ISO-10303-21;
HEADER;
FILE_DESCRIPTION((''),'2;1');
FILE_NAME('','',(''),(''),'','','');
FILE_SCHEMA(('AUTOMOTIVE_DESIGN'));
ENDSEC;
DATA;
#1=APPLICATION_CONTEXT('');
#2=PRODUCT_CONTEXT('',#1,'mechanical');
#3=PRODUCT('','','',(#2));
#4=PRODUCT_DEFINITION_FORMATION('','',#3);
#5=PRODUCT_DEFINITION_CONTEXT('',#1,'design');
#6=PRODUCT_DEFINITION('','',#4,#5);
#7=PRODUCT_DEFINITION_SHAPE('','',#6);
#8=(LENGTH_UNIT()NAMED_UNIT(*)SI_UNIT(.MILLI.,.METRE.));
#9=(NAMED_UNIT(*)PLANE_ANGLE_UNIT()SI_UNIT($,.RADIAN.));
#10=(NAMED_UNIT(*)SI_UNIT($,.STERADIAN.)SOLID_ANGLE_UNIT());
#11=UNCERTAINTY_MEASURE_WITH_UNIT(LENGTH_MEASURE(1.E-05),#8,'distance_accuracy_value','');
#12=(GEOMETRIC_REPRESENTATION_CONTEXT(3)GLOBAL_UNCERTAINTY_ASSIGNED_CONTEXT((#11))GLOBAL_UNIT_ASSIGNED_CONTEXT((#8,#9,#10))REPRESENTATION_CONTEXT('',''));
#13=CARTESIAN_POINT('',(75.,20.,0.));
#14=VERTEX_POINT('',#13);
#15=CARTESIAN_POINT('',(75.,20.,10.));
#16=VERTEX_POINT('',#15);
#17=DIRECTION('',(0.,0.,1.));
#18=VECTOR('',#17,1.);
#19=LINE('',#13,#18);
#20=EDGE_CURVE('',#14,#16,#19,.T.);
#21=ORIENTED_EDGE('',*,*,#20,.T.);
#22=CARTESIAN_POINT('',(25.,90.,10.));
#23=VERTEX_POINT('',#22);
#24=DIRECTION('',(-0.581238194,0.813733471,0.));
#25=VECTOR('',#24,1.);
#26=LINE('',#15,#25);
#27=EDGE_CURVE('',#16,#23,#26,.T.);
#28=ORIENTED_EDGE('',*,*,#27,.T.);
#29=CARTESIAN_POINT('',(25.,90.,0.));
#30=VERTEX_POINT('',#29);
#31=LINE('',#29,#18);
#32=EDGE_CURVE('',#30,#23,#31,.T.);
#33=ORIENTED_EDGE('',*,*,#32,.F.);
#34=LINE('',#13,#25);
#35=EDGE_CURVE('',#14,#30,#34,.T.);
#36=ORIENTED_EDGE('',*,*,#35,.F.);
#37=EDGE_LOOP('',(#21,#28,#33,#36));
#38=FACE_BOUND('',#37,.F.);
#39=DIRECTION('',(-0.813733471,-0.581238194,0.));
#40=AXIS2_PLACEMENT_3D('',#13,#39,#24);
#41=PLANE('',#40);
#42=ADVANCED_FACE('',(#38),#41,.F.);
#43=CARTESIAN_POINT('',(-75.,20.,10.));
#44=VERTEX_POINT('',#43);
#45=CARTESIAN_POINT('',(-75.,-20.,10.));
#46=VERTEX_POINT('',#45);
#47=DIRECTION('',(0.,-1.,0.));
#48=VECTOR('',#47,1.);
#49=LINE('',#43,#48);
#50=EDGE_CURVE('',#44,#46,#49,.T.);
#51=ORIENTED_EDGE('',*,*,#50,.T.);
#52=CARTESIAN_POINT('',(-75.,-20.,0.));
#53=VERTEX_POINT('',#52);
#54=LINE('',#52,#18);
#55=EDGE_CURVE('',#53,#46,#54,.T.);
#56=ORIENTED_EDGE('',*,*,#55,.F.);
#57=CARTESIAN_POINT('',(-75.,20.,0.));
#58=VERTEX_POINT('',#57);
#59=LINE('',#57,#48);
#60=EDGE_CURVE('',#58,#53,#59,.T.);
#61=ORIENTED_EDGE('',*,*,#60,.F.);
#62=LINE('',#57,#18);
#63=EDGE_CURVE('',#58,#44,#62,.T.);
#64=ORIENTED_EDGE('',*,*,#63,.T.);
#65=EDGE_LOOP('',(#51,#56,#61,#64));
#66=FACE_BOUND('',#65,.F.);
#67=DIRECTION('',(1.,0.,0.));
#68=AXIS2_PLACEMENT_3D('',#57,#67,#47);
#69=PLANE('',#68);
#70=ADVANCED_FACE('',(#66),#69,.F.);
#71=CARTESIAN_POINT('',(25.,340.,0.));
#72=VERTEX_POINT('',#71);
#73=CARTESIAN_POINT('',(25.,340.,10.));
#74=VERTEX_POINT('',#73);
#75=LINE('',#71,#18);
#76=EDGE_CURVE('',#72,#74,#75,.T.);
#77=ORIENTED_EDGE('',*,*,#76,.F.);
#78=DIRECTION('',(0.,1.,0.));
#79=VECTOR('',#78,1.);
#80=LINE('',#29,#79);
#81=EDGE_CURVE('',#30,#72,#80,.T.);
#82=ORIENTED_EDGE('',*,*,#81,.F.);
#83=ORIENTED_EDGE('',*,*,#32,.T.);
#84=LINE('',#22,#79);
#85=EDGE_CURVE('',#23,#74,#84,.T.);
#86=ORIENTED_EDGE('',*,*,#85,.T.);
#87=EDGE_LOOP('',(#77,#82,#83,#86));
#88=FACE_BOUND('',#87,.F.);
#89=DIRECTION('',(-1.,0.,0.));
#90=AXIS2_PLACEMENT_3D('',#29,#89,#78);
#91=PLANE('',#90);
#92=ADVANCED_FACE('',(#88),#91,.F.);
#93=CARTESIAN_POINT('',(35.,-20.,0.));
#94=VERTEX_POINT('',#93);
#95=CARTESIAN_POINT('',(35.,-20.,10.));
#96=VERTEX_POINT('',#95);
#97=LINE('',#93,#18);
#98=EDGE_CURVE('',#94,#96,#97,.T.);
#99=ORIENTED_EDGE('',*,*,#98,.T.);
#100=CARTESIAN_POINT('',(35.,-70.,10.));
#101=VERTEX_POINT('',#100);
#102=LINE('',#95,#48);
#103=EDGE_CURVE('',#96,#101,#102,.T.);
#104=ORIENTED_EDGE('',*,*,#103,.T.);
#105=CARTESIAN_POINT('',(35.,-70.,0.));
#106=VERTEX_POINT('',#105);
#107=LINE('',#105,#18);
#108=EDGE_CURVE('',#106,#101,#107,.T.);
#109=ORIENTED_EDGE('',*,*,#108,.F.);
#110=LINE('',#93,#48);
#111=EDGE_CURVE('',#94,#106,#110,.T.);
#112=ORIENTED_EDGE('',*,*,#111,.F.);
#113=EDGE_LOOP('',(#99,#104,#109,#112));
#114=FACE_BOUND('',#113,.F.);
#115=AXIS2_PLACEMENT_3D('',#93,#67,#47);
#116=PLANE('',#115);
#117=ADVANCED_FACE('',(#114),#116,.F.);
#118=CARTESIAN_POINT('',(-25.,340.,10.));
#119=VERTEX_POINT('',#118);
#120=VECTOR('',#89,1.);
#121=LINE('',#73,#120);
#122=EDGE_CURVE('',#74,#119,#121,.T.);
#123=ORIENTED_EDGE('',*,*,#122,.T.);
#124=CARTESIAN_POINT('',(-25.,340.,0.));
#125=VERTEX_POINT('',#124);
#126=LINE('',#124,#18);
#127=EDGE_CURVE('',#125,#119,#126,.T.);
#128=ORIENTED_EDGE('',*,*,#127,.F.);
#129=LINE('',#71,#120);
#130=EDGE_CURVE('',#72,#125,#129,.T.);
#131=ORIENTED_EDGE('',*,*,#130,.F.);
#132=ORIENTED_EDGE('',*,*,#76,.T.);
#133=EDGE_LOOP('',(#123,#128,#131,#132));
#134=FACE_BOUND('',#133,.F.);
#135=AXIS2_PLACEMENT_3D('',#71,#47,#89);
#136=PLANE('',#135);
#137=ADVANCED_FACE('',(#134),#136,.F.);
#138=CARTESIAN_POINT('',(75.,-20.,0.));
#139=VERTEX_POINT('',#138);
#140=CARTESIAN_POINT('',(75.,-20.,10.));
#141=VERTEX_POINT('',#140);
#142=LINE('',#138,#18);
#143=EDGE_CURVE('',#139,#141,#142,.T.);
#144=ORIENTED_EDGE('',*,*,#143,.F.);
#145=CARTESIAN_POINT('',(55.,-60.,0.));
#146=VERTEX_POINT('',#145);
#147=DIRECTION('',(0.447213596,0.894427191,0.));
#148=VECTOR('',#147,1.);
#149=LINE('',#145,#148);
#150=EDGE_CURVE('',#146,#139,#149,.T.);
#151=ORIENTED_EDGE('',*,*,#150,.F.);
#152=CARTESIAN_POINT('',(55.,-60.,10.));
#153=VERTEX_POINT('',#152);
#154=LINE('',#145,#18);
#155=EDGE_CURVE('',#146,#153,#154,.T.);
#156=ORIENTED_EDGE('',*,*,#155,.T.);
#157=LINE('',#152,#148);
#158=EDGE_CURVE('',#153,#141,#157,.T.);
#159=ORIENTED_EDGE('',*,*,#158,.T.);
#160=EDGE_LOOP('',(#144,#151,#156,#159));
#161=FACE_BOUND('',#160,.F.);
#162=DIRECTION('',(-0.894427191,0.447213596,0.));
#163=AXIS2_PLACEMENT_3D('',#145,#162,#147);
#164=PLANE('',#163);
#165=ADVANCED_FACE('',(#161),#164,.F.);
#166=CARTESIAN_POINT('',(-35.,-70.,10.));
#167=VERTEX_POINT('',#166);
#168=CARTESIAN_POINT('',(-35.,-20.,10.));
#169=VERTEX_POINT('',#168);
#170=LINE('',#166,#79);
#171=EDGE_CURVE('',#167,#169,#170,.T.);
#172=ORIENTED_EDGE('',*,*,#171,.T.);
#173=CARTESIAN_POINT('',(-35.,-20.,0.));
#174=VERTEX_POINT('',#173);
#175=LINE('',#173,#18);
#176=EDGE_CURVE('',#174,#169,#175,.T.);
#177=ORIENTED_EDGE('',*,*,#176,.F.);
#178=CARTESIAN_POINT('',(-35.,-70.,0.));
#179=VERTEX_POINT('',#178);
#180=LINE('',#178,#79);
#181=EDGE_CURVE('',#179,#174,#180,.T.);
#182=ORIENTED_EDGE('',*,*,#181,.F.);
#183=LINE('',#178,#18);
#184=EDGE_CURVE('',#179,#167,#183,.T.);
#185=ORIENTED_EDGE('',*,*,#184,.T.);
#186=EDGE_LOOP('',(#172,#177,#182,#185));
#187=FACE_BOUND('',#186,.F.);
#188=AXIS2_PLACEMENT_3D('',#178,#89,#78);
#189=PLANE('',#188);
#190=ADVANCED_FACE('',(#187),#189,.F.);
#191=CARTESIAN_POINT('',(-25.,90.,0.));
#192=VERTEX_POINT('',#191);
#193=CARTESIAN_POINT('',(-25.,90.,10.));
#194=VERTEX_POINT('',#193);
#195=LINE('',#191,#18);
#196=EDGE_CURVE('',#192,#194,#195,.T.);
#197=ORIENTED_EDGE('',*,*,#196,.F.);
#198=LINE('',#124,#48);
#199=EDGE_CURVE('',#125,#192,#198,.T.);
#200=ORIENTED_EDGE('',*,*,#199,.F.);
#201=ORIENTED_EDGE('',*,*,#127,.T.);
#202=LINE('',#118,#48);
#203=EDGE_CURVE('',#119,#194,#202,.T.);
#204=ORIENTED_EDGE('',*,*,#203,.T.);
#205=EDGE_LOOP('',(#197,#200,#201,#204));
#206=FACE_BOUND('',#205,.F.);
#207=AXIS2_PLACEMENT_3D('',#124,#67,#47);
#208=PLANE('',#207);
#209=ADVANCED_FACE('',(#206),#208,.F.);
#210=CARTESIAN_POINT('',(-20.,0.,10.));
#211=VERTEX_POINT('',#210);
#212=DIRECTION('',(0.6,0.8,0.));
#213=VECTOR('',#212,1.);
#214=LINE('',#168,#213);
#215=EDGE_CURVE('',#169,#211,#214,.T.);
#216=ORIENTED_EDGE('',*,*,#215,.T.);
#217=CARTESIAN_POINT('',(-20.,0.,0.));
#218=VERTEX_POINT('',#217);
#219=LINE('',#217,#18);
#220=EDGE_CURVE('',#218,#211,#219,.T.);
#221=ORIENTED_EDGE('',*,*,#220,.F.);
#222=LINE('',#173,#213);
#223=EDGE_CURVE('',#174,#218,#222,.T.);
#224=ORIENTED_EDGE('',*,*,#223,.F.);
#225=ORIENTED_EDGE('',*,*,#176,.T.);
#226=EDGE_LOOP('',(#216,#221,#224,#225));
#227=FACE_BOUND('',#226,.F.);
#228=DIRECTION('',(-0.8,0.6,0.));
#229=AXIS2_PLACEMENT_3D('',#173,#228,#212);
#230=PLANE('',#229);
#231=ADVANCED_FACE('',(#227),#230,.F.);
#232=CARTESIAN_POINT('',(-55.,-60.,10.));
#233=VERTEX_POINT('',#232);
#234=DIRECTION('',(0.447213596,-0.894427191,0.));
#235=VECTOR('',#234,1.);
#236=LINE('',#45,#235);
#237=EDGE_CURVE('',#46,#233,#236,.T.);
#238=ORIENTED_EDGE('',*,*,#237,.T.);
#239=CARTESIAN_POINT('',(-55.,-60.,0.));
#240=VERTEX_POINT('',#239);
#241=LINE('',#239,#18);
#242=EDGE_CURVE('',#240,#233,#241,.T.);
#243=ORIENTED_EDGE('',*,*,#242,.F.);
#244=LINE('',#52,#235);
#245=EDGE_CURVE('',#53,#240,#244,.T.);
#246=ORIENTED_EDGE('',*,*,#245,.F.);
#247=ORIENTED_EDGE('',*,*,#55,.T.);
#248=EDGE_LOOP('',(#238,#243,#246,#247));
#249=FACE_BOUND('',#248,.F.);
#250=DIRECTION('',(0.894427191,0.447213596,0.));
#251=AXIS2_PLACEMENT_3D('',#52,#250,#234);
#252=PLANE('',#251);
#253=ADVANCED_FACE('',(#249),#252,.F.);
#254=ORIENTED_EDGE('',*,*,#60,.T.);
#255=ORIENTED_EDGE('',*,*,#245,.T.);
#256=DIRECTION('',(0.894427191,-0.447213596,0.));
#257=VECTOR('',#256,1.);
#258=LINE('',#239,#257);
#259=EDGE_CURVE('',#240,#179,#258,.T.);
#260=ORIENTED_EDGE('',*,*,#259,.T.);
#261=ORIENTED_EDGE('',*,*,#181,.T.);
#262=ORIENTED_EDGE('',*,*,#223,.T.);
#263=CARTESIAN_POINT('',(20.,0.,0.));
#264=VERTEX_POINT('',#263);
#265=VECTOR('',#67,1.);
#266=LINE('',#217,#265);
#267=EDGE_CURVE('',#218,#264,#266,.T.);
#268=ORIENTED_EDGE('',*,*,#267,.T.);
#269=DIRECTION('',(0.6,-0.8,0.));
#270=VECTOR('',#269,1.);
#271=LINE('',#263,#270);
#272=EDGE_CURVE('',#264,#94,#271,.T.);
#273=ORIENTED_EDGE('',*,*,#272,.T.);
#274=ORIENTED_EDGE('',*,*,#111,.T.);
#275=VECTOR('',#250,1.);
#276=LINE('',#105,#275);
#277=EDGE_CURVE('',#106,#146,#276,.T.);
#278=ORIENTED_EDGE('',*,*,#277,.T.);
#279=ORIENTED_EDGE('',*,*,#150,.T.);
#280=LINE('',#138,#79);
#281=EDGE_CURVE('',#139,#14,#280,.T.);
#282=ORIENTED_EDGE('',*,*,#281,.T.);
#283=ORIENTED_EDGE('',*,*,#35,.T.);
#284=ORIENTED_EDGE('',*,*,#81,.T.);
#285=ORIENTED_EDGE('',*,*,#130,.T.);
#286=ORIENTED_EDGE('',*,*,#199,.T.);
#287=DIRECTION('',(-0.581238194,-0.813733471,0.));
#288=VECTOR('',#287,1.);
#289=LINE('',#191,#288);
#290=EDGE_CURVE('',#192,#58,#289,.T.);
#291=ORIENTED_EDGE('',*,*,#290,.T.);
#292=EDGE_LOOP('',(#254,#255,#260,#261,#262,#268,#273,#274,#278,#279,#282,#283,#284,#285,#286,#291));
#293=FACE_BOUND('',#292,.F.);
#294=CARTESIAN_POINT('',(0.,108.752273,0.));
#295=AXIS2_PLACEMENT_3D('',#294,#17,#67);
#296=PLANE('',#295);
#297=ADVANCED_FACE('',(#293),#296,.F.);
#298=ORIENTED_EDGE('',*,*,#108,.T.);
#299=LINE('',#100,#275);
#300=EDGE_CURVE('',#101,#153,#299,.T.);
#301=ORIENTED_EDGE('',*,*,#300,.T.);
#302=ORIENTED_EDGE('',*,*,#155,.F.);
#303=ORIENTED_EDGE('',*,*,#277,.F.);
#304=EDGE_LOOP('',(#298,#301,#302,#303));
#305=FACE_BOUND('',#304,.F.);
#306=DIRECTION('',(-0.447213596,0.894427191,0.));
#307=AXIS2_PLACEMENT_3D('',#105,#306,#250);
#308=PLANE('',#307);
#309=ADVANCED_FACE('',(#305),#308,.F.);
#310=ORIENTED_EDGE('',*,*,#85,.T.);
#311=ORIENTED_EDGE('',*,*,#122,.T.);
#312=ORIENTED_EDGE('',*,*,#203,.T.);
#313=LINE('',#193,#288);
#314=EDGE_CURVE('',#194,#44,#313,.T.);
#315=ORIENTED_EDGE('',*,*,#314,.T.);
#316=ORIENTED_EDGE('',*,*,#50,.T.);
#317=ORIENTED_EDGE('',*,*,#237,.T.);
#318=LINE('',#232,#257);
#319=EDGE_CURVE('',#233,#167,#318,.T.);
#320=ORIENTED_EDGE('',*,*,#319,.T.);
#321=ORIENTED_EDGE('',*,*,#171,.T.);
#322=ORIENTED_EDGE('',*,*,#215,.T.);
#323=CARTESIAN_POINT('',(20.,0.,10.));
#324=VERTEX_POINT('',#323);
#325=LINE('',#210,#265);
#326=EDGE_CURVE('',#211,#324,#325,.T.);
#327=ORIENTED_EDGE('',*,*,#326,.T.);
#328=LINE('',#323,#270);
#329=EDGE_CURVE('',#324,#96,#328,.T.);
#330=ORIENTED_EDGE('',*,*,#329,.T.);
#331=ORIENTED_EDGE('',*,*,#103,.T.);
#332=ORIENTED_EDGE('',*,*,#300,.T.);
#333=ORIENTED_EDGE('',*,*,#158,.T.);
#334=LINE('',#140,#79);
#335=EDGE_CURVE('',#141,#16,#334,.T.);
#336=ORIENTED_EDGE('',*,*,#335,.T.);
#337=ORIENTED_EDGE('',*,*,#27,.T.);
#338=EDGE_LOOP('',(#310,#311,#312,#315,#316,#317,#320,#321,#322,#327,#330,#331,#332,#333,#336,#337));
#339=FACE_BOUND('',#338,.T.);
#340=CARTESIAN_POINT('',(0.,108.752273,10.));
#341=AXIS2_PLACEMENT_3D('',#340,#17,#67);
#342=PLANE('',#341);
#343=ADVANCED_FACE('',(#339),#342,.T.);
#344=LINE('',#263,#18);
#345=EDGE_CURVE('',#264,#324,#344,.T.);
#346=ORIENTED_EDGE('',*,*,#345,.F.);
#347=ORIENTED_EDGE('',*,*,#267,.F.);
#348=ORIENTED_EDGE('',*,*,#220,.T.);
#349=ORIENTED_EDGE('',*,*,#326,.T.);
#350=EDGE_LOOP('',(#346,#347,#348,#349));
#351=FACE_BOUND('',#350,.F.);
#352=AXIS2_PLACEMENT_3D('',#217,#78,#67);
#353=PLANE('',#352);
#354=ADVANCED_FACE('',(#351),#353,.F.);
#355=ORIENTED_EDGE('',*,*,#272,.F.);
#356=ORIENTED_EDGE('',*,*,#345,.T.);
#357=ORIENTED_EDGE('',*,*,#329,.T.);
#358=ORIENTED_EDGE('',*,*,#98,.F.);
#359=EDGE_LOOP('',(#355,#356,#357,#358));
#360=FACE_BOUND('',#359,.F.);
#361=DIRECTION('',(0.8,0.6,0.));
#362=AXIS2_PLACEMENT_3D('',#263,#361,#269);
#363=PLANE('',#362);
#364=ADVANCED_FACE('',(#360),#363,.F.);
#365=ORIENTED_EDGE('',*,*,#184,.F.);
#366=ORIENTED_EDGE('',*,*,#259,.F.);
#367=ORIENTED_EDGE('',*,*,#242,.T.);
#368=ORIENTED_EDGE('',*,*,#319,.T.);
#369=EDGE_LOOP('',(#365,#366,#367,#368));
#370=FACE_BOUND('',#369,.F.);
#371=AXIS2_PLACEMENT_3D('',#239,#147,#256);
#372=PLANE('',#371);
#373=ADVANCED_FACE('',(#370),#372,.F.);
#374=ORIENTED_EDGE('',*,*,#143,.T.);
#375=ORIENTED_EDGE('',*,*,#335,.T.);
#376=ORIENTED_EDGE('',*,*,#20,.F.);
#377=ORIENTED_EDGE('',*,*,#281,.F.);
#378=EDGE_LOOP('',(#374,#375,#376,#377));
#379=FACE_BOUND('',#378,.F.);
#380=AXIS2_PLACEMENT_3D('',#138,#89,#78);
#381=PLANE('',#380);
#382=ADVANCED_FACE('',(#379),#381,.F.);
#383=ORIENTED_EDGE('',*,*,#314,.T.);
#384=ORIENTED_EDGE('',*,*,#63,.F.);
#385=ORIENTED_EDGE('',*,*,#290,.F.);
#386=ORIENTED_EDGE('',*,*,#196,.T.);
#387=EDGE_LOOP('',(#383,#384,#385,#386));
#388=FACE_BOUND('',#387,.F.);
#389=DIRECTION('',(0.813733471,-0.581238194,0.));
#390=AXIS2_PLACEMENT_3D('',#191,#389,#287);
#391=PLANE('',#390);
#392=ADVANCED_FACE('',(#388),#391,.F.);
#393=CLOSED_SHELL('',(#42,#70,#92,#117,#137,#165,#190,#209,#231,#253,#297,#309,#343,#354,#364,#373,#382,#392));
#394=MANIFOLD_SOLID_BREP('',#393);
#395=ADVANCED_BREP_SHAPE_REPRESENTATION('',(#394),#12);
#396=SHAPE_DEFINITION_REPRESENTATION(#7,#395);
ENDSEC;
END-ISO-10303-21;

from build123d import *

# Parameters (mm, degrees)
F1_DEPTH = 10


# Not quite as in the source:
# - a feature of the source that left no trace in its solid (it failed there, or was rolled back) is left out


with BuildPart() as f1:
    # F0 (on Top) → F1 (new body)
    with BuildSketch(Plane.XY):
        Polygon((-35, -20), (-20, 0), (20, 0), (35, -20), (35, -70), (55, -60), (75, -20), (75, 20), (25, 90), (25, 340), (-25, 340), (-25, 90), (-75, 20), (-75, -20), (-55, -60), (-35, -70), align=None)
    extrude(amount=F1_DEPTH)


solid = f1.part
